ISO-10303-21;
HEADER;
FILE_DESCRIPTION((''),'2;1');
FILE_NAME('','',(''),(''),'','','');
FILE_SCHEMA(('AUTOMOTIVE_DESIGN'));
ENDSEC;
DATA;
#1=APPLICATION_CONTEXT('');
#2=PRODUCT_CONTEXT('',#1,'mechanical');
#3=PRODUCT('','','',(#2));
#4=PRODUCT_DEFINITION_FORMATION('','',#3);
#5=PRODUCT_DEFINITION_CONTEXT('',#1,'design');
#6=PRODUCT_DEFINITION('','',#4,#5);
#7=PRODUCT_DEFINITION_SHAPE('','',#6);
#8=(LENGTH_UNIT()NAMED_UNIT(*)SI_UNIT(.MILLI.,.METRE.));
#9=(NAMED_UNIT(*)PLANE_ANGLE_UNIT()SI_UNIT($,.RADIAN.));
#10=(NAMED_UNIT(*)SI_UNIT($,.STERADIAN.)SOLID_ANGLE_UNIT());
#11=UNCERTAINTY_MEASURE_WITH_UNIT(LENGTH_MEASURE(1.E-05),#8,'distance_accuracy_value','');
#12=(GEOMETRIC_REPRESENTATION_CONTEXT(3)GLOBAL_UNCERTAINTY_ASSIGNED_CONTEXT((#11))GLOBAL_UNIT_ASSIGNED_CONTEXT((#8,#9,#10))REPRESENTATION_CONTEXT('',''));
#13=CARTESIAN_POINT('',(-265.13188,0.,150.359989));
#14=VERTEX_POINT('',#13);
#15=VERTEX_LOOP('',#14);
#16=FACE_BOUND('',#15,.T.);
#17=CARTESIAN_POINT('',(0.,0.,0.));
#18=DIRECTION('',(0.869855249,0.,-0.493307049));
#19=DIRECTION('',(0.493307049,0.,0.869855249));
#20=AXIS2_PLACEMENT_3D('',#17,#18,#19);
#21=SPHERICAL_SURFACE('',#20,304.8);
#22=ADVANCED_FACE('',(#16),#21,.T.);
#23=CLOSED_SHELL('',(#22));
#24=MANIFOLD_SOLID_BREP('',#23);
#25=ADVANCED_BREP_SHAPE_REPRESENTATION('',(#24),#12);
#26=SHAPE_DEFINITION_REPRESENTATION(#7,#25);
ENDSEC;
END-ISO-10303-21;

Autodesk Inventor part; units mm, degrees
ref_plane "YZ Plane" through (0, 0, 0) normal (1, 0, 0) x (0, 1, 0)
ref_plane "XZ Plane" through (0, 0, 0) normal (0, 1, 0) x (-1, 0, 0)
ref_plane "XY Plane" through (0, 0, 0) normal (0, 0, 1) x (1, 0, 0)
sketch "Sketch2" plane through (0, 0, 0) normal (0, 1, 0) x (-1, 0, 0)
  circle A0 centre (0, 0) radius 304.8
  line L0 (265.1319, 150.36) -> (-265.1319, -150.36)
  dimension "d1" = 609.6
revolve "Revolution1" add sketch "Sketch2" angle 360 about axis through (-265.1319, 0, 150.36) along (0.8698552, 0, -0.4933071) picked at (0.1115, 184.6712) contours L0 A0
properties part number "ball"
